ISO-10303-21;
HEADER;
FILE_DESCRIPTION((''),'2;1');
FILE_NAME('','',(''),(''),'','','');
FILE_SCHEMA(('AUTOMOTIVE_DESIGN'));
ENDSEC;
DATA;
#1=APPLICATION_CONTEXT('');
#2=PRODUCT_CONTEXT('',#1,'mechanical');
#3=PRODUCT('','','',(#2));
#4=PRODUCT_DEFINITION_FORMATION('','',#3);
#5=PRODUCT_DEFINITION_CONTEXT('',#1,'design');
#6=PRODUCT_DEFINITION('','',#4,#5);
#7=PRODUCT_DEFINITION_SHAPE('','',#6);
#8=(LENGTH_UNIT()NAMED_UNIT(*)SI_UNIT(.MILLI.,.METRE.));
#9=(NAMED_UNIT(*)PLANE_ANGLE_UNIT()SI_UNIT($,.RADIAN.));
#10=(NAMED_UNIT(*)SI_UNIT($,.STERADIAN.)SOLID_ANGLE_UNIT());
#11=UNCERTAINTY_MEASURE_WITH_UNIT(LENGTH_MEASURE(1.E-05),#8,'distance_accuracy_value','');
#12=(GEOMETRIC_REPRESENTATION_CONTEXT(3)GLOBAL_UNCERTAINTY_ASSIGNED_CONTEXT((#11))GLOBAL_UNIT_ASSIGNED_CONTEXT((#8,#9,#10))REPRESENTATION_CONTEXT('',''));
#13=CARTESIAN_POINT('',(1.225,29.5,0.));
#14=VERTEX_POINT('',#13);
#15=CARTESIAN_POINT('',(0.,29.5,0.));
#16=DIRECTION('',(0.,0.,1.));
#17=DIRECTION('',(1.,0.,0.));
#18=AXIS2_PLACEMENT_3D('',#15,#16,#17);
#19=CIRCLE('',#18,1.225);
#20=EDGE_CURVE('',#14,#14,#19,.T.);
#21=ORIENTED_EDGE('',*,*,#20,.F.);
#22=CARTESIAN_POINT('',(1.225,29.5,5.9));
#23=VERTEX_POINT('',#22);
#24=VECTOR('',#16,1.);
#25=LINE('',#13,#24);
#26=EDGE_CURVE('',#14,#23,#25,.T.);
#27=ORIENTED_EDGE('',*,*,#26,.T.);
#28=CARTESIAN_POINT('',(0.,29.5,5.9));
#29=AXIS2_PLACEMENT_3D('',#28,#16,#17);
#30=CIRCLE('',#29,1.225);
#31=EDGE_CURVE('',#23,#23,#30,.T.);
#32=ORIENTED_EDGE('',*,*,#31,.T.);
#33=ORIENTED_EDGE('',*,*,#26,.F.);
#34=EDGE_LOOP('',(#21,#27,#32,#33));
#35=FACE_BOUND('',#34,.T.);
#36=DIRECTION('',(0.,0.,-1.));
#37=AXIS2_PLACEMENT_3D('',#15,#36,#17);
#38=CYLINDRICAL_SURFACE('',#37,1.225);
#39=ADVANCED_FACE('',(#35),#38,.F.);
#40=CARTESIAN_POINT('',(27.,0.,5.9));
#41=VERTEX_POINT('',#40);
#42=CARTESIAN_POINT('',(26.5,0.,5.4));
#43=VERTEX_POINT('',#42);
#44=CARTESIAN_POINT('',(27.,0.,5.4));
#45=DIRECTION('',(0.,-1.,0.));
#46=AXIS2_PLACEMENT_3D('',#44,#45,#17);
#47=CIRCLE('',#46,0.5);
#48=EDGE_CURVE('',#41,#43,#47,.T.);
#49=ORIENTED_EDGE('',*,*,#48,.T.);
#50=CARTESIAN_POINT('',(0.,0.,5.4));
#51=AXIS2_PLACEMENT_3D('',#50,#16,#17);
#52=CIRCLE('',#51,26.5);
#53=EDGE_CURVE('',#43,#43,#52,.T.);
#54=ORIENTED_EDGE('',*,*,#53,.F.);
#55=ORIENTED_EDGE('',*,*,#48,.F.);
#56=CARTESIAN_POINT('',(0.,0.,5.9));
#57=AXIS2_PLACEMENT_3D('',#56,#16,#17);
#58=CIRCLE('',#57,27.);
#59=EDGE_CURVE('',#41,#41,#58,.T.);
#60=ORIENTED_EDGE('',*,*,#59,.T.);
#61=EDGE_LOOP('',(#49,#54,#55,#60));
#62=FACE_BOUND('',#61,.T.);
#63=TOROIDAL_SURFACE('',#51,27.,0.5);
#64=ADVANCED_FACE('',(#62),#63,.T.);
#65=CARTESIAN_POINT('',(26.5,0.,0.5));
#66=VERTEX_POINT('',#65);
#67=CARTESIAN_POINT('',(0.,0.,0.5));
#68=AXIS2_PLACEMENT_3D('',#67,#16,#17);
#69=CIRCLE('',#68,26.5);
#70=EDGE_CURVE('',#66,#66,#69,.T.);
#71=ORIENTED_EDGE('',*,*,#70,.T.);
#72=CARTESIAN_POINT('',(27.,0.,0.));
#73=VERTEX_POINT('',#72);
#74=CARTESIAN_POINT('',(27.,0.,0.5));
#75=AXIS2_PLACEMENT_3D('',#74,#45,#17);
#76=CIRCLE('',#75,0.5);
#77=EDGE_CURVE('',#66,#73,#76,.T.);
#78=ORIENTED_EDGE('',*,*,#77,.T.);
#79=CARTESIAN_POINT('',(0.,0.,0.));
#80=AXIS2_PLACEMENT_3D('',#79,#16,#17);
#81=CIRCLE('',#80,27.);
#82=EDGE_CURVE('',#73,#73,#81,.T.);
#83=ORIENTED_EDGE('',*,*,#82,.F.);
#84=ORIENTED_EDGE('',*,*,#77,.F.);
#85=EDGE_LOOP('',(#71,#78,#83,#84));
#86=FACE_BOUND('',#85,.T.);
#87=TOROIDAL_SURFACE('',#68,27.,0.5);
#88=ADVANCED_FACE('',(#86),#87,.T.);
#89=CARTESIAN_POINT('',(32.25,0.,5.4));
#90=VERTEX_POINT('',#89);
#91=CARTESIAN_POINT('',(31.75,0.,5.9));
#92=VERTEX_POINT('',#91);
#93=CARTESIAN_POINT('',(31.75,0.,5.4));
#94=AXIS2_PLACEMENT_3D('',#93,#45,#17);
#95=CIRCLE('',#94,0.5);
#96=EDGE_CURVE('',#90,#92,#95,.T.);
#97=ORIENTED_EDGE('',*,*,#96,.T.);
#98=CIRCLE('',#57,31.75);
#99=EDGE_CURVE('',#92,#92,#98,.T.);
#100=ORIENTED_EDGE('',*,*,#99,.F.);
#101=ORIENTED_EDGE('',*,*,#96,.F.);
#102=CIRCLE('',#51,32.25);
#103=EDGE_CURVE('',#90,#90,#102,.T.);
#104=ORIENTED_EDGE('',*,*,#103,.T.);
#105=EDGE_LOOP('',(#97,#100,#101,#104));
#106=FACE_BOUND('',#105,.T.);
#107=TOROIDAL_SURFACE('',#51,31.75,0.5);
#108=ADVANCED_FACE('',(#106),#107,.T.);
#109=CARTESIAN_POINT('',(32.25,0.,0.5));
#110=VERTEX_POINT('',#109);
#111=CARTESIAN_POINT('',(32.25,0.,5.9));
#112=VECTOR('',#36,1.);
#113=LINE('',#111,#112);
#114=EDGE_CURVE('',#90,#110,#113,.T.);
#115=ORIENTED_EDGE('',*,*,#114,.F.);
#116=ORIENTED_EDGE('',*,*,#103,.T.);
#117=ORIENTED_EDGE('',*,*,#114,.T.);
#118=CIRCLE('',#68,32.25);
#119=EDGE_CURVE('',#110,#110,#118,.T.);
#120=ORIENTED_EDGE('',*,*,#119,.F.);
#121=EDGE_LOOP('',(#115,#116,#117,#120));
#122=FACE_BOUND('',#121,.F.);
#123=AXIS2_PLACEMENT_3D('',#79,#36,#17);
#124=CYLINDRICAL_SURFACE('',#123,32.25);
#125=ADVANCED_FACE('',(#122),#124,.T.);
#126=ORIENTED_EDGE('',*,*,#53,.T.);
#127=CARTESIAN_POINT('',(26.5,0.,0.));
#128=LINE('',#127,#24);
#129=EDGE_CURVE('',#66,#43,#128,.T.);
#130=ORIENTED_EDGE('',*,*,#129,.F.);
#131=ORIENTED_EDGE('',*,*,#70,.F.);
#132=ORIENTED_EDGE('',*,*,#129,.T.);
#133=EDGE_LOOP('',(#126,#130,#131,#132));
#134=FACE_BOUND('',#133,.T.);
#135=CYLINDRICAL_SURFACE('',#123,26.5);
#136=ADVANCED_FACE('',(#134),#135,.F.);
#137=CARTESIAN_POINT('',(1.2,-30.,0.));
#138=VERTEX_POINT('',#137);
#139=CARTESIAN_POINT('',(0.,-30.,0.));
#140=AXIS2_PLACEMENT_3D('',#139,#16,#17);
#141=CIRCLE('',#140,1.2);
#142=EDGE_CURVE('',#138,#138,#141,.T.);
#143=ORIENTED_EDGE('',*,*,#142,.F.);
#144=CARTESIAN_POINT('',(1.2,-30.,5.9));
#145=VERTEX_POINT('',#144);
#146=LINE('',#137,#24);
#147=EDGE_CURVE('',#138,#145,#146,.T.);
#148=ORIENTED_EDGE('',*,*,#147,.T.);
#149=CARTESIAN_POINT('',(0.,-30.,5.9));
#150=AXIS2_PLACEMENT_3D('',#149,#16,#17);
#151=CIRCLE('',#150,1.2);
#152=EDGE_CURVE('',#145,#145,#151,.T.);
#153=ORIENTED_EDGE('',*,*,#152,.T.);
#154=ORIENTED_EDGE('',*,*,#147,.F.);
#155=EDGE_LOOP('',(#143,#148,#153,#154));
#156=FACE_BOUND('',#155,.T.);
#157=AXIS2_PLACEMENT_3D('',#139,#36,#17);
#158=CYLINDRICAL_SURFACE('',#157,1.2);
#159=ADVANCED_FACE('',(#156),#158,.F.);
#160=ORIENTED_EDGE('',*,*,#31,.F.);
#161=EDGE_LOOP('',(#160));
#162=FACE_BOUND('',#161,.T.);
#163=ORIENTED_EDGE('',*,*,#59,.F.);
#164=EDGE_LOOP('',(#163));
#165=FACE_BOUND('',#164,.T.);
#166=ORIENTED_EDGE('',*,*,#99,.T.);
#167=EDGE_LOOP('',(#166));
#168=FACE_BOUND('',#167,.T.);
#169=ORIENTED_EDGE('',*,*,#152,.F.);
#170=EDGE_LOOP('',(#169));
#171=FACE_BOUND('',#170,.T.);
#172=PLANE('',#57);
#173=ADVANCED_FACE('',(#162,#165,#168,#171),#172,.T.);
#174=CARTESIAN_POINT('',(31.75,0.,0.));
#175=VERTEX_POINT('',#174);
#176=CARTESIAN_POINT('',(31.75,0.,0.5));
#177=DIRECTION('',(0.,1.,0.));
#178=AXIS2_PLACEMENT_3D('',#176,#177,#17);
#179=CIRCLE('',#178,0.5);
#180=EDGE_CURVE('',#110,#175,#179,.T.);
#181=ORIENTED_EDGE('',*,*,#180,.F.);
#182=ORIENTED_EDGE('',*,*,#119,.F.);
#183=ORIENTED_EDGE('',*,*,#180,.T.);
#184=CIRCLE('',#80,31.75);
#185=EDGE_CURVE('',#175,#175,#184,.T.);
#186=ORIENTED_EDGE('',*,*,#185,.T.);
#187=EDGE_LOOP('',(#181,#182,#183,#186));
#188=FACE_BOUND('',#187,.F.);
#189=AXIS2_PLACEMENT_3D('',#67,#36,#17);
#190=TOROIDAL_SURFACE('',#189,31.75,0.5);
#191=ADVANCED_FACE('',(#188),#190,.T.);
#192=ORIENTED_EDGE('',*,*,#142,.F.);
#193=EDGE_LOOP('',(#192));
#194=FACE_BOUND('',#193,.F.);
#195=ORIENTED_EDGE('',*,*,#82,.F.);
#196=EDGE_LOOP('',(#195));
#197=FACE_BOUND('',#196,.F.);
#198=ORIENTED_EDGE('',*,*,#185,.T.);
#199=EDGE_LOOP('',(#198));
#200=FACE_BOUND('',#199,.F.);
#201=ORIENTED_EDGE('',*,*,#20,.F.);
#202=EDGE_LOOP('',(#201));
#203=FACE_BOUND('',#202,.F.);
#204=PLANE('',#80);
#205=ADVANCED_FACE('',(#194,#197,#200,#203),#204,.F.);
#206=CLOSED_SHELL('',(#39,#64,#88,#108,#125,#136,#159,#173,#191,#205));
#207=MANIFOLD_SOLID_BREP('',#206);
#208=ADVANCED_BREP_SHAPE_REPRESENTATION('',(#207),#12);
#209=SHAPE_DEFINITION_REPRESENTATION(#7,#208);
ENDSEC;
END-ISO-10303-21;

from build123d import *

# Parameters (mm, degrees)
F0_R     = 32.25
F0_R_2   = 1.2
F0_R_3   = 26.5
F0_R_4   = 1.225
F1_DEPTH = 5
F2_DEPTH = 5.9
F3_R     = 0.5
F4_R     = 0.5


with BuildPart() as f1:
    # F0 (on Top) → F1 (new body)
    with BuildSketch(Plane.XY):
        Circle(F0_R)
        with Locations((0, -30)):
            Circle(F0_R_2, mode=Mode.SUBTRACT)
        Circle(F0_R_3, mode=Mode.SUBTRACT)
        with Locations((0, 29.5)):
            Circle(F0_R_4, mode=Mode.SUBTRACT)
    extrude(amount=F1_DEPTH)

    # F0 (on Top) → F2 (join)
    with BuildSketch(Plane.XY):
        Circle(F0_R)
        with Locations((0, -30)):
            Circle(F0_R_2, mode=Mode.SUBTRACT)
        Circle(F0_R_3, mode=Mode.SUBTRACT)
        with Locations((0, 29.5)):
            Circle(F0_R_4, mode=Mode.SUBTRACT)
    extrude(amount=F2_DEPTH)

    # F3
    f3_edges = [f1.edges().sort_by_distance(p)[0] for p in [
        (-26.5, 0, 0),
        (-32.25, 0, 0),
        (-32.25, 0, 5.9),
    ]]
    fillet(f3_edges, radius=F3_R)

    # F4
    f4_edges = [f1.edges().sort_by_distance(p)[0] for p in [
        (-26.5, 0, 5.9),
        (-32.25, 0, 5.4),
    ]]
    fillet(f4_edges, radius=F4_R)


solid = f1.part
